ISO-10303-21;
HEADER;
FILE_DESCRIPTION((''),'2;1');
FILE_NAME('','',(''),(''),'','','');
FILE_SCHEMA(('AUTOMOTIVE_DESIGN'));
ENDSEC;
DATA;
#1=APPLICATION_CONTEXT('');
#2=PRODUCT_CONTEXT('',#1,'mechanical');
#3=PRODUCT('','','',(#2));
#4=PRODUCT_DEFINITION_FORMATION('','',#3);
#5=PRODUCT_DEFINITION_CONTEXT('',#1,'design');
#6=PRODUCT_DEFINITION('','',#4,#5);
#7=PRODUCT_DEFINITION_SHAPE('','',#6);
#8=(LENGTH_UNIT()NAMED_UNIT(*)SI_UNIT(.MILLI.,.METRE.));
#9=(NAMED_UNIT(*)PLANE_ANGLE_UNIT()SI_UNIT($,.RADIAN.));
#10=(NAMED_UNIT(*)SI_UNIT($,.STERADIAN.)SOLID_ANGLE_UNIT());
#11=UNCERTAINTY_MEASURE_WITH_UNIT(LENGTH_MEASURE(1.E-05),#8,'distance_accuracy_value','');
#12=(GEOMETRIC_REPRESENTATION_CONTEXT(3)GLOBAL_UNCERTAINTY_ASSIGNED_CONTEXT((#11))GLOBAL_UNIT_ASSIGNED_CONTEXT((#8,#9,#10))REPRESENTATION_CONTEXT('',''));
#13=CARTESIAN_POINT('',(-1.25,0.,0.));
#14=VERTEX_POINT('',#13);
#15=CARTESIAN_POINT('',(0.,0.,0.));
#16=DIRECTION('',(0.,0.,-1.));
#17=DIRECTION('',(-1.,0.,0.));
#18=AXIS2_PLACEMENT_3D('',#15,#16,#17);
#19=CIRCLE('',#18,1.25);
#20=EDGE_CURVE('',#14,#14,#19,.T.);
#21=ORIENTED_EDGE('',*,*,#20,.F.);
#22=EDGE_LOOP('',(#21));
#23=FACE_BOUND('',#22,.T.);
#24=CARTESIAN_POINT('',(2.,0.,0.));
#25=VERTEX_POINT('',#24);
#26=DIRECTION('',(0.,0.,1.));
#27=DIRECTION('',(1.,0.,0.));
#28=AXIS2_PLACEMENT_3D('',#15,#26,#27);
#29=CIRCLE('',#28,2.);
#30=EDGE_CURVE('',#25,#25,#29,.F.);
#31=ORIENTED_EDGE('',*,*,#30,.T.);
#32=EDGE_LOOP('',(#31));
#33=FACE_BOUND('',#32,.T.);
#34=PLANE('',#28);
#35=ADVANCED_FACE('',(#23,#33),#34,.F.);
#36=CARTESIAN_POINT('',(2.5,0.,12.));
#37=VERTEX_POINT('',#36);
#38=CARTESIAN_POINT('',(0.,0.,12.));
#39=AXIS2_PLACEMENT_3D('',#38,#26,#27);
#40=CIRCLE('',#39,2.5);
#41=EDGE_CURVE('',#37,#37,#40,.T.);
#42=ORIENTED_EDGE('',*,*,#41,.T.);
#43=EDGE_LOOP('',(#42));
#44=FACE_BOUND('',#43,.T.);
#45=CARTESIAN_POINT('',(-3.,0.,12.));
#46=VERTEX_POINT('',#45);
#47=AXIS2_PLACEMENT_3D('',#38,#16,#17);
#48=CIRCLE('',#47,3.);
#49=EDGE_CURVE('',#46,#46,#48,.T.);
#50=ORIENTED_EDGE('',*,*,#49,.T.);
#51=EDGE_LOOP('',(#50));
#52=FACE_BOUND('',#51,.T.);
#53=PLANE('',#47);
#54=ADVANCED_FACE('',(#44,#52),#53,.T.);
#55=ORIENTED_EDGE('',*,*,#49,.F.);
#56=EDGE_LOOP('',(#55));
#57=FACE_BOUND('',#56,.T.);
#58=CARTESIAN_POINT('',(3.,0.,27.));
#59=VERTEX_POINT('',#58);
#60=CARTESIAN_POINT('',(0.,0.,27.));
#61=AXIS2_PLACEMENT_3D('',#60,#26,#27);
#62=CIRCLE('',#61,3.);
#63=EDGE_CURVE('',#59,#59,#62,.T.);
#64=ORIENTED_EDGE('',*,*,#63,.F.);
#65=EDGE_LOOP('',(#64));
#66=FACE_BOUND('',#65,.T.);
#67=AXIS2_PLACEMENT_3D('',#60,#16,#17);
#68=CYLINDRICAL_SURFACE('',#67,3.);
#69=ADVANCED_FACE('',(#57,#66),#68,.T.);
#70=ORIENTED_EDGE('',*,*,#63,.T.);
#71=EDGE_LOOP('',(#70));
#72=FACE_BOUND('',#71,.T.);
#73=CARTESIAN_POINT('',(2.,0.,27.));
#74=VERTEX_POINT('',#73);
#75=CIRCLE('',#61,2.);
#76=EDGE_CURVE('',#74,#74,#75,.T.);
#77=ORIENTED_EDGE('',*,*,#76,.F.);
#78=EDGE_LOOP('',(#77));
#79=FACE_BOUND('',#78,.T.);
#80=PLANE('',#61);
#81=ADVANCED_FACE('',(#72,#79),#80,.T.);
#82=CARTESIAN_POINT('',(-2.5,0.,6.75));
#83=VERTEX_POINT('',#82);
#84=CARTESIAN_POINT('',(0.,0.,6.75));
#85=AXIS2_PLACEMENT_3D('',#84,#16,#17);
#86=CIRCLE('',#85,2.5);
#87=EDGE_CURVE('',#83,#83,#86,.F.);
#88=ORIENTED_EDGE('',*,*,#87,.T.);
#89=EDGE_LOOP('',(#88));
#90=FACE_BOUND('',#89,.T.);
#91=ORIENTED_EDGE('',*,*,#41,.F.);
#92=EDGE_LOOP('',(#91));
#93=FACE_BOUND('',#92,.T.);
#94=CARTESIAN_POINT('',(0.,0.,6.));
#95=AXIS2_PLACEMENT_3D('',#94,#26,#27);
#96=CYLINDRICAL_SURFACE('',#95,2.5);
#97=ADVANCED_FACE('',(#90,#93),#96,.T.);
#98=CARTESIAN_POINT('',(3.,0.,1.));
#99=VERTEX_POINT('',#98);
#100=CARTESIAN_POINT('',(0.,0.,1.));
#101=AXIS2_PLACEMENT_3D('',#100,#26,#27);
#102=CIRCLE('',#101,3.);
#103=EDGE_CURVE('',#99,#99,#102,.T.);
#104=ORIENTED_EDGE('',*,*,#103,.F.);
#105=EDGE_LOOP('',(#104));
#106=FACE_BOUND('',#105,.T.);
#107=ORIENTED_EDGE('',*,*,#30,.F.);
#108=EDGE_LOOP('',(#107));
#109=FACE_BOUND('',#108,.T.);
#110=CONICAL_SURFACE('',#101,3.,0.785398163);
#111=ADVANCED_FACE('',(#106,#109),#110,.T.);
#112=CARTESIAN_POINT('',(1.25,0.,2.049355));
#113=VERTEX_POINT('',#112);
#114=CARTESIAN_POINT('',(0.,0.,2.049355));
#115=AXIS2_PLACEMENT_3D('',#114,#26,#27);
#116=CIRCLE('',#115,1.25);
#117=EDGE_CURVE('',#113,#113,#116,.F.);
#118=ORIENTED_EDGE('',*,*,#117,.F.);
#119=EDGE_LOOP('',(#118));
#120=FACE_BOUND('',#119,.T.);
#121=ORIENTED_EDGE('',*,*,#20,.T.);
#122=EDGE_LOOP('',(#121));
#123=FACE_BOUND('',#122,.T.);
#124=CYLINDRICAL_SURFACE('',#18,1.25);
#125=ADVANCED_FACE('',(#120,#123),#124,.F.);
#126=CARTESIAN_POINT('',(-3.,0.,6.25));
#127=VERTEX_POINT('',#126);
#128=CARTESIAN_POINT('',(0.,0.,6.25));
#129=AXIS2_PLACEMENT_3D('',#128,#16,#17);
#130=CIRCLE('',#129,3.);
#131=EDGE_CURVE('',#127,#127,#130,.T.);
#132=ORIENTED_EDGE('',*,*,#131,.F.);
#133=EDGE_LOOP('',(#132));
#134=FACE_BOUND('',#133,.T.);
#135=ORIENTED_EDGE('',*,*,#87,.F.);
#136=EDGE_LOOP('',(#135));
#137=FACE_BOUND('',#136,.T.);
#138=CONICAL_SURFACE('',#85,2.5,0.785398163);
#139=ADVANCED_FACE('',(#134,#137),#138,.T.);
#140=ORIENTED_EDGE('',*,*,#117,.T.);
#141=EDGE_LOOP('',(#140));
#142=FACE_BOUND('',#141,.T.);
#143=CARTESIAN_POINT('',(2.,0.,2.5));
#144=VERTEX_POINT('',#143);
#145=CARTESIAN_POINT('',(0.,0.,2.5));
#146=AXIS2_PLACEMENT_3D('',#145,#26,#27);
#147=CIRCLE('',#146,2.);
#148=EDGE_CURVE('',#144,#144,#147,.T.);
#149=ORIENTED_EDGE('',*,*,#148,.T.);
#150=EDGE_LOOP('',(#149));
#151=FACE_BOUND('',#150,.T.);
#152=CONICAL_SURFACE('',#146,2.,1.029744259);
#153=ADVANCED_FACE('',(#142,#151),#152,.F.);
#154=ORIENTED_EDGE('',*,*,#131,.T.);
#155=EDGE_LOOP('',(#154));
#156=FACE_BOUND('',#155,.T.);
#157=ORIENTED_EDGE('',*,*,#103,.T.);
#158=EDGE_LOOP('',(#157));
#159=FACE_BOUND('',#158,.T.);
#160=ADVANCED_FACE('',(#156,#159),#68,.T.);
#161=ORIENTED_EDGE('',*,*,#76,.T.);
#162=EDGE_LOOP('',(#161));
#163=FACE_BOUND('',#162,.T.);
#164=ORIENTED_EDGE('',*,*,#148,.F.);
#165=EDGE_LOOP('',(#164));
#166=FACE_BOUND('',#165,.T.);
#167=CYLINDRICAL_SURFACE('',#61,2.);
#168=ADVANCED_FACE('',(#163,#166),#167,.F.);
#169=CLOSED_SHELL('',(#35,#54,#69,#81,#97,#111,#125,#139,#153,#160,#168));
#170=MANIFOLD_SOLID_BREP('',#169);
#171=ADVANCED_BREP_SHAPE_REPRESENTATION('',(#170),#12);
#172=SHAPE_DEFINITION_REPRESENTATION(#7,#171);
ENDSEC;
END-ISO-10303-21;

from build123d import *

# Parameters (mm, degrees)
ESQUISSE1_R                         = 3
BOSS_EXTRU_1_DEPTH                  = 27
DIAM_TRE_DU_PER_AGE_4_0_4_1_D       = 4
DIAM_TRE_DU_PER_AGE_4_0_4_1_DEPTH   = 24.5
DIAM_TRE_DU_PER_AGE_4_0_4_1_TIP     = 1.201721238
DIAM_TRE_DU_PER_AGE_2_5_2_5_2_D     = 2.5
DIAM_TRE_DU_PER_AGE_2_5_2_5_2_DEPTH = 3
DIAM_TRE_DU_PER_AGE_2_5_2_5_2_TIP   = 0.751075774
ENL_V_START                         = -15
ESQUISSE6_W                         = 11.750178357
ESQUISSE6_H                         = 11.384595502
ESQUISSE6_R                         = 2.5
ENL_V_MAT_EXTRU_1_DEPTH             = 6
CHANFREIN1_SIZE                     = 1
CHANFREIN2_SIZE                     = 0.75


with BuildPart() as part:
    # Esquisse1 → Boss.-Extru.1 (new body)
    with BuildSketch(Plane.XY):
        Circle(ESQUISSE1_R)
    extrude(amount=BOSS_EXTRU_1_DEPTH)

    # Diamètre du perçage Ø4.0 (4)1
    with Locations(Plane.XY.offset(27)):
        with Locations((0, 0)):
            Hole(DIAM_TRE_DU_PER_AGE_4_0_4_1_D / 2, depth=DIAM_TRE_DU_PER_AGE_4_0_4_1_DEPTH)
            with Locations((0, 0, -(DIAM_TRE_DU_PER_AGE_4_0_4_1_DEPTH + DIAM_TRE_DU_PER_AGE_4_0_4_1_TIP / 2))):  # 118° drill point
                Cone(0, DIAM_TRE_DU_PER_AGE_4_0_4_1_D / 2, DIAM_TRE_DU_PER_AGE_4_0_4_1_TIP, mode=Mode.SUBTRACT)

    # Diamètre du perçage Ø2.5 (2.5)2
    with Locations(Plane(origin=(0, 0, 0), x_dir=(-1, 0, 0), z_dir=(0, 0, -1))):
        with Locations((0, 0)):
            Hole(DIAM_TRE_DU_PER_AGE_2_5_2_5_2_D / 2, depth=DIAM_TRE_DU_PER_AGE_2_5_2_5_2_DEPTH)
            with Locations((0, 0, -(DIAM_TRE_DU_PER_AGE_2_5_2_5_2_DEPTH + DIAM_TRE_DU_PER_AGE_2_5_2_5_2_TIP / 2))):  # 118° drill point
                Cone(0, DIAM_TRE_DU_PER_AGE_2_5_2_5_2_D / 2, DIAM_TRE_DU_PER_AGE_2_5_2_5_2_TIP, mode=Mode.SUBTRACT)

    # Esquisse6 → Enlèv. mat.-Extru.1 (cut)
    with BuildSketch(Plane.XY.offset(27).offset(ENL_V_START)):
        with Locations((-0.219764127, 0.428836611)):
            Rectangle(ESQUISSE6_W, ESQUISSE6_H)
        Circle(ESQUISSE6_R, mode=Mode.SUBTRACT)
    extrude(amount=-ENL_V_MAT_EXTRU_1_DEPTH, mode=Mode.SUBTRACT)

    # Chanfrein1
    chanfrein1_edges = [part.edges().sort_by_distance(p)[0] for p in [
        (-3, 0, 0),
    ]]
    chamfer(chanfrein1_edges, length=CHANFREIN1_SIZE)

    # Chanfrein2
    # the kernel refuses this chamfer: 0.75 mm, written as the material it adds along each edge
    with BuildSketch(Plane(origin=(0, 0, 6), x_dir=(1, 0, 0), z_dir=(0, -1, 0))) as chanfrein2_piece_1_section:
        Polygon((2.5 + CHANFREIN2_SIZE, 0), (2.5, CHANFREIN2_SIZE), (2.5, 0), align=None)
    chanfrein2_piece_1 = revolve(axis=Axis((0, 0, 6), (0, 0, 1)), mode=Mode.PRIVATE)
    chanfrein2_piece_1 = chanfrein2_piece_1 & Plane(origin=(0, 0, 6.498848263), x_dir=(1, 0, 0), z_dir=(0, 0, -1)) * Cylinder(3, 13, mode=Mode.PRIVATE)
    add(chanfrein2_piece_1)


solid = part.part
